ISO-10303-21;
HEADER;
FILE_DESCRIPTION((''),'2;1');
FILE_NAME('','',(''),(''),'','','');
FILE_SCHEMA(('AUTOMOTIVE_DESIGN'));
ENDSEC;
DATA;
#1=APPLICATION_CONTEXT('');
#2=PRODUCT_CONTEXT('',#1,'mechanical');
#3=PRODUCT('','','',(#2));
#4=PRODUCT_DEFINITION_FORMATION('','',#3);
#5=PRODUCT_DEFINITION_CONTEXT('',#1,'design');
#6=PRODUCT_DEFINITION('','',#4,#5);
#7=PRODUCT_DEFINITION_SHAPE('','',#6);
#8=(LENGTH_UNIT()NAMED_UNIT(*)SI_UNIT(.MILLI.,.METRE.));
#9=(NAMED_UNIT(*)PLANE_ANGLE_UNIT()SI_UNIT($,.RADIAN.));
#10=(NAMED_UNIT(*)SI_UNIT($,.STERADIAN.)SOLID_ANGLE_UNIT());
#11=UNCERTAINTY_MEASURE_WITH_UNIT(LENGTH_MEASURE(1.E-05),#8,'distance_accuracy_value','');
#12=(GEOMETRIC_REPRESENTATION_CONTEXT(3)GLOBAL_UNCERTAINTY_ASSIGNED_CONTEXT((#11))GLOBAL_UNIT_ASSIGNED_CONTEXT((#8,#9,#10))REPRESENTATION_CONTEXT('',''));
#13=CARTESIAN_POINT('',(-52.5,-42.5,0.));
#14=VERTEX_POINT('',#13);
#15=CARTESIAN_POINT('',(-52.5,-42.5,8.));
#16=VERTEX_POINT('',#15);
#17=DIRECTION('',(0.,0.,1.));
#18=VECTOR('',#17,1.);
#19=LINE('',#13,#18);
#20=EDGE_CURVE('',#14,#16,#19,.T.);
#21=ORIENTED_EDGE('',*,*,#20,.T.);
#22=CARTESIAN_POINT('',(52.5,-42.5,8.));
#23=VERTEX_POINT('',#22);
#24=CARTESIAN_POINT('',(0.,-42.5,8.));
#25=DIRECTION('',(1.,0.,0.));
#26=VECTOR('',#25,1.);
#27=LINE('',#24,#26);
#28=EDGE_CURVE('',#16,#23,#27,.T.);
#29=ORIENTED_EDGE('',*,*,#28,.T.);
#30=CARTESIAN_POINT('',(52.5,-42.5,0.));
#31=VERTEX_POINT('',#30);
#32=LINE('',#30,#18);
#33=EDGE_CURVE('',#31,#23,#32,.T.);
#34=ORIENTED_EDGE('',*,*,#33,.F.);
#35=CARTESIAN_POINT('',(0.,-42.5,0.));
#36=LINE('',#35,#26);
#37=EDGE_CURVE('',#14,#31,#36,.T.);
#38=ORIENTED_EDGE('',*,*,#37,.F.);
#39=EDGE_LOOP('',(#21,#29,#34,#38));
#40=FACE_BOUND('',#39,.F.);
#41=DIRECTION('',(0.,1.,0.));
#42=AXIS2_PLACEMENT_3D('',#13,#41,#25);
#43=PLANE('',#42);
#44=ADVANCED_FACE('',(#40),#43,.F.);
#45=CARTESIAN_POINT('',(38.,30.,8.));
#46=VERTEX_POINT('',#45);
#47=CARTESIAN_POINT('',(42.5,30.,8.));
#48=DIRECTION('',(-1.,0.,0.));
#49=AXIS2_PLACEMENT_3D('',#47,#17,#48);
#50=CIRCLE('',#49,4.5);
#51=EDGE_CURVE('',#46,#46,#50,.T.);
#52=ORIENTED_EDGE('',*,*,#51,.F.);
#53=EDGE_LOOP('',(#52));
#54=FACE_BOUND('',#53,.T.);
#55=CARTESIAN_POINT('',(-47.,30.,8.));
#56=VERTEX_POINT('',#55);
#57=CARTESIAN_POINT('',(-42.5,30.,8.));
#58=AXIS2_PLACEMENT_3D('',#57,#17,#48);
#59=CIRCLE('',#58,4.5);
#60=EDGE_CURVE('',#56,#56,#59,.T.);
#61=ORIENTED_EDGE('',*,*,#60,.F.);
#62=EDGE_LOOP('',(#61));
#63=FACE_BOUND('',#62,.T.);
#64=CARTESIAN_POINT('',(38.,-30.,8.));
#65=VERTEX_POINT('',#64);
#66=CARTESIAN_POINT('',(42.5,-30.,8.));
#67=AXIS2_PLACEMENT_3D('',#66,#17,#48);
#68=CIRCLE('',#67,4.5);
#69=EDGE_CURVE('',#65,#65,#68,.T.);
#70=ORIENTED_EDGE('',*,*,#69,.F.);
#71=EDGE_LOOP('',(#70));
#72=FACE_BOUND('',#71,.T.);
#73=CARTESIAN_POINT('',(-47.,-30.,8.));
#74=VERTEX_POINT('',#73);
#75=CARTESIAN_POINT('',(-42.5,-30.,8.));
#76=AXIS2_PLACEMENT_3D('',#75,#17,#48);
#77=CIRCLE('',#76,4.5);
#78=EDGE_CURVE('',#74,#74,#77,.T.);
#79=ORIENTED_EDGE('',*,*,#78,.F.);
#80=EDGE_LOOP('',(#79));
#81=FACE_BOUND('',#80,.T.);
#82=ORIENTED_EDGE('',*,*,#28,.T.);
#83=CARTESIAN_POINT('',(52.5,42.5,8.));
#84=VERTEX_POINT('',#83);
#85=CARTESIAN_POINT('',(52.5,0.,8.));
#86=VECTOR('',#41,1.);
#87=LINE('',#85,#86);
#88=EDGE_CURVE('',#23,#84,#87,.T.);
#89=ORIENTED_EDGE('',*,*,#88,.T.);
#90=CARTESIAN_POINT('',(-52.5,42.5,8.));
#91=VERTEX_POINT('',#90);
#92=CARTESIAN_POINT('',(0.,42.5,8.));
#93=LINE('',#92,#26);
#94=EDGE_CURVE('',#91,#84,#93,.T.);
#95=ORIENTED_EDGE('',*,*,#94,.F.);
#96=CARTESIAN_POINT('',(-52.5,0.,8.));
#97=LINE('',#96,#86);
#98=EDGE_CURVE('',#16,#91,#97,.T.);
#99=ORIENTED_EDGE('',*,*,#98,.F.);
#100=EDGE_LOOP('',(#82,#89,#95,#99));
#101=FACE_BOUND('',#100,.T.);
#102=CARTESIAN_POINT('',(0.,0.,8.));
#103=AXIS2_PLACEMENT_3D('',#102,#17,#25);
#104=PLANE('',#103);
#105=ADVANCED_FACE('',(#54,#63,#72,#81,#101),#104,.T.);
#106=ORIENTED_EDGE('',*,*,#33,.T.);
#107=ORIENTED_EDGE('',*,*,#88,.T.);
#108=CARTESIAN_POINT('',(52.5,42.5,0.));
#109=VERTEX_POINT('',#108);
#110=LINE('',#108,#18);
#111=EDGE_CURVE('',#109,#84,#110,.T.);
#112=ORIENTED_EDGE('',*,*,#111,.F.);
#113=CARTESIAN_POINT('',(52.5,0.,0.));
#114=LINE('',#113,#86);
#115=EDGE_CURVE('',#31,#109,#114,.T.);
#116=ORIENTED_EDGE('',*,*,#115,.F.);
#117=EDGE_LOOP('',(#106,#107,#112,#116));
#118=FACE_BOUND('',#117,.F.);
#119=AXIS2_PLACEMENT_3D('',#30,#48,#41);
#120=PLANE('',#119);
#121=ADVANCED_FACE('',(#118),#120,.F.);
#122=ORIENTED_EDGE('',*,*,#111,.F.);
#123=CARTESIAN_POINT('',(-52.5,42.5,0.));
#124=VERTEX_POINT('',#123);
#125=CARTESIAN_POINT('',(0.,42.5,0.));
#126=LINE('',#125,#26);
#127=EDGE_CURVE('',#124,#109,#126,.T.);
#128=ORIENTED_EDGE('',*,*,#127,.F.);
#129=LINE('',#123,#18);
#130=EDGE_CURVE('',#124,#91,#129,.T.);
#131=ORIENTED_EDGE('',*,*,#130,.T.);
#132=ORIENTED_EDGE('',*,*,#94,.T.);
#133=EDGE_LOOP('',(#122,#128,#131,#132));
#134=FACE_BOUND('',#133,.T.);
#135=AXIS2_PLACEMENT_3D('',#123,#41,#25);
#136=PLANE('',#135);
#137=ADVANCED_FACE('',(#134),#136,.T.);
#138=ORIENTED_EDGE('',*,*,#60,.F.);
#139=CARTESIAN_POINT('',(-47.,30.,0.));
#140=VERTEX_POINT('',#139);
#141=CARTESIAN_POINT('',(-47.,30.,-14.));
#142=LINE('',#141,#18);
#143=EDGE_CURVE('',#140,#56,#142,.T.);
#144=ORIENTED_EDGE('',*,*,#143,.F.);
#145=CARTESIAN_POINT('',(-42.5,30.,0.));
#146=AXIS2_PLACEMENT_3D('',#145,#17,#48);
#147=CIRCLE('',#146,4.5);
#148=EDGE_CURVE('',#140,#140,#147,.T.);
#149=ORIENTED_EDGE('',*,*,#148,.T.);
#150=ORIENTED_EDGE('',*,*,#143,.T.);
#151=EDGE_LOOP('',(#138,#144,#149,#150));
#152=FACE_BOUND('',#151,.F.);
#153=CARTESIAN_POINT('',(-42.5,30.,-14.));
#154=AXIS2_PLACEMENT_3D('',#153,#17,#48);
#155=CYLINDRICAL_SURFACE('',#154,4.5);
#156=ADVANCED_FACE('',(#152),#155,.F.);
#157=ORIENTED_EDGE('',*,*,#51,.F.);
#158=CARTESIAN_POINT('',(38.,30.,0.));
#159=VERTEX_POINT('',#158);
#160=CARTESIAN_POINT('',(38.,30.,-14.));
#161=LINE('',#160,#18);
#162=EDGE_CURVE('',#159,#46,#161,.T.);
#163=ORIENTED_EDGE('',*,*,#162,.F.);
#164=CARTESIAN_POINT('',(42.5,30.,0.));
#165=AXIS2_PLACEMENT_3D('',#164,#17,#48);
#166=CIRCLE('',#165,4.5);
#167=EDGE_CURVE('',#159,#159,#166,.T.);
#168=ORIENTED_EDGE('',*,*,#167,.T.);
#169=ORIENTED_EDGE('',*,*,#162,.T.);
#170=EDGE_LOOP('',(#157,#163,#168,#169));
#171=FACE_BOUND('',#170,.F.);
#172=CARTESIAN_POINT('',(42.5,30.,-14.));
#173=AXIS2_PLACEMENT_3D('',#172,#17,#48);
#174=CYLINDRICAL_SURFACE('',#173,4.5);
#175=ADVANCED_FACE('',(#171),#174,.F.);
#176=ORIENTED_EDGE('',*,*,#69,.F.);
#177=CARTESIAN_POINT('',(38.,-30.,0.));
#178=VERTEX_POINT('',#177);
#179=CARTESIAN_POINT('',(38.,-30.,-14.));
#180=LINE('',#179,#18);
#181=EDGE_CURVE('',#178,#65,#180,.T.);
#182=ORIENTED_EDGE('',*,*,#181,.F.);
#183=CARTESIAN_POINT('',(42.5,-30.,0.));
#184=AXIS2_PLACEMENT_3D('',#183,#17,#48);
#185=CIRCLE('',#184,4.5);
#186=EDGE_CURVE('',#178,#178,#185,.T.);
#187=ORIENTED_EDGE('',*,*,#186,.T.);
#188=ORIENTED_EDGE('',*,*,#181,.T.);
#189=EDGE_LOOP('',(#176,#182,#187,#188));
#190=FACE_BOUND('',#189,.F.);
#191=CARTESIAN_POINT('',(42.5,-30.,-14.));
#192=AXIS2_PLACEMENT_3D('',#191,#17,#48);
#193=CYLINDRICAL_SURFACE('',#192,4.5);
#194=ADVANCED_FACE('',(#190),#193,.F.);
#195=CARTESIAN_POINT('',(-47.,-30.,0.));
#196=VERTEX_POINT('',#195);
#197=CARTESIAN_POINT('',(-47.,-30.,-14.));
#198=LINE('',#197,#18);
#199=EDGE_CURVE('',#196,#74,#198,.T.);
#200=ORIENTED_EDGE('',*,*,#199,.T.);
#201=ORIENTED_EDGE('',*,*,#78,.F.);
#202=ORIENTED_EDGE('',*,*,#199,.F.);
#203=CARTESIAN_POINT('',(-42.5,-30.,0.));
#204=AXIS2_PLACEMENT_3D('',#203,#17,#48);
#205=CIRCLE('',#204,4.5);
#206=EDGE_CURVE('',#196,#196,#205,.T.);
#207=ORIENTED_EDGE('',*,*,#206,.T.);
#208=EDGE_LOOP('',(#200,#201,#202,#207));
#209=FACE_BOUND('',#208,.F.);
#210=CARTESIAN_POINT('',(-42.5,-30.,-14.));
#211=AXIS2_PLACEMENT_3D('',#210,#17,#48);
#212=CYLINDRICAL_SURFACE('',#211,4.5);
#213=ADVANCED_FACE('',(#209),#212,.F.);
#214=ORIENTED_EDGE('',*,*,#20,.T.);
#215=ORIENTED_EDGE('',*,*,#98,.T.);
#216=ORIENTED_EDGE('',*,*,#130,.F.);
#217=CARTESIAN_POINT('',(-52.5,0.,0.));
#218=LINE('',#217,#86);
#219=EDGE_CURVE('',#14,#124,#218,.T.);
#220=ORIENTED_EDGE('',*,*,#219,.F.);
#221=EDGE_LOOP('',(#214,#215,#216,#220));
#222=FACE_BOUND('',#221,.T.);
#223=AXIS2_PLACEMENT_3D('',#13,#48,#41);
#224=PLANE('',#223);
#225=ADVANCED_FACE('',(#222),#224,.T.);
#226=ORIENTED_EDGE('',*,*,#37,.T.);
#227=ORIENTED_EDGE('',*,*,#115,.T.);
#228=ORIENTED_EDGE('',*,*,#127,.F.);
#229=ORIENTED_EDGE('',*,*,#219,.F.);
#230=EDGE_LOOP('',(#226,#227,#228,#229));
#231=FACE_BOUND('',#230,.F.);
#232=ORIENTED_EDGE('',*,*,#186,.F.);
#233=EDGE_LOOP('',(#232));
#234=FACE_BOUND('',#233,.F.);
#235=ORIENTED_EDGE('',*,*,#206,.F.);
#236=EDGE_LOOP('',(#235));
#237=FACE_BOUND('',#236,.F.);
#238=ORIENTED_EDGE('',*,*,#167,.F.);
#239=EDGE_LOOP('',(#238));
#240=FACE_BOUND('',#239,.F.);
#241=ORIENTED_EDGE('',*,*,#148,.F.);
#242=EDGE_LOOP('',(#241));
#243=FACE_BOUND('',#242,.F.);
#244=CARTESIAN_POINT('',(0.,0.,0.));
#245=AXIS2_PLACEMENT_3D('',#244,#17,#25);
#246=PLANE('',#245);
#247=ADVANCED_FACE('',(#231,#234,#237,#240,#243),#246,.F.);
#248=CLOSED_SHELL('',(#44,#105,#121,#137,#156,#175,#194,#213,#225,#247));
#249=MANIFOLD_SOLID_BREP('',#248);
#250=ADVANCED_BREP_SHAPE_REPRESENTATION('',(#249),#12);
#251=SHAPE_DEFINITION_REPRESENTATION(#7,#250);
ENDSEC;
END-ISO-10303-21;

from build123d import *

# Parameters (mm, degrees)
F0_W     = 105
F0_H     = 85
F0_R     = 4
F1_DEPTH = 8
F2_D     = 9
F2_DEPTH = 14
F2_TIP   = 2.7038727856


with BuildPart() as f1:
    # F0 (on Top) → F1 (new body)
    with BuildSketch(Plane.XY):
        Rectangle(F0_W, F0_H)
        with Locations((-42.5, -30)):
            Circle(F0_R, mode=Mode.SUBTRACT)
        with Locations((42.5, -30)):
            Circle(F0_R, mode=Mode.SUBTRACT)
        with Locations((-42.5, 30)):
            Circle(F0_R, mode=Mode.SUBTRACT)
        with Locations((42.5, 30)):
            Circle(F0_R, mode=Mode.SUBTRACT)
        with Locations((-42.5, 30)):
            Circle(F0_R)
        with Locations((42.5, 30)):
            Circle(F0_R)
        with Locations((42.5, -30)):
            Circle(F0_R)
        with Locations((-42.5, -30)):
            Circle(F0_R)
    extrude(amount=F1_DEPTH)

    # F2
    with Locations(Plane(origin=(0, 0, 0), x_dir=(1, 0, 0), z_dir=(0, 0, -1))):
        with Locations((-42.5, -30), (42.5, -30), (42.5, 30), (-42.5, 30)):
            Hole(F2_D / 2, depth=F2_DEPTH)
            with Locations((0, 0, -(F2_DEPTH + F2_TIP / 2))):  # 118° drill point
                Cone(0, F2_D / 2, F2_TIP, mode=Mode.SUBTRACT)


solid = f1.part
